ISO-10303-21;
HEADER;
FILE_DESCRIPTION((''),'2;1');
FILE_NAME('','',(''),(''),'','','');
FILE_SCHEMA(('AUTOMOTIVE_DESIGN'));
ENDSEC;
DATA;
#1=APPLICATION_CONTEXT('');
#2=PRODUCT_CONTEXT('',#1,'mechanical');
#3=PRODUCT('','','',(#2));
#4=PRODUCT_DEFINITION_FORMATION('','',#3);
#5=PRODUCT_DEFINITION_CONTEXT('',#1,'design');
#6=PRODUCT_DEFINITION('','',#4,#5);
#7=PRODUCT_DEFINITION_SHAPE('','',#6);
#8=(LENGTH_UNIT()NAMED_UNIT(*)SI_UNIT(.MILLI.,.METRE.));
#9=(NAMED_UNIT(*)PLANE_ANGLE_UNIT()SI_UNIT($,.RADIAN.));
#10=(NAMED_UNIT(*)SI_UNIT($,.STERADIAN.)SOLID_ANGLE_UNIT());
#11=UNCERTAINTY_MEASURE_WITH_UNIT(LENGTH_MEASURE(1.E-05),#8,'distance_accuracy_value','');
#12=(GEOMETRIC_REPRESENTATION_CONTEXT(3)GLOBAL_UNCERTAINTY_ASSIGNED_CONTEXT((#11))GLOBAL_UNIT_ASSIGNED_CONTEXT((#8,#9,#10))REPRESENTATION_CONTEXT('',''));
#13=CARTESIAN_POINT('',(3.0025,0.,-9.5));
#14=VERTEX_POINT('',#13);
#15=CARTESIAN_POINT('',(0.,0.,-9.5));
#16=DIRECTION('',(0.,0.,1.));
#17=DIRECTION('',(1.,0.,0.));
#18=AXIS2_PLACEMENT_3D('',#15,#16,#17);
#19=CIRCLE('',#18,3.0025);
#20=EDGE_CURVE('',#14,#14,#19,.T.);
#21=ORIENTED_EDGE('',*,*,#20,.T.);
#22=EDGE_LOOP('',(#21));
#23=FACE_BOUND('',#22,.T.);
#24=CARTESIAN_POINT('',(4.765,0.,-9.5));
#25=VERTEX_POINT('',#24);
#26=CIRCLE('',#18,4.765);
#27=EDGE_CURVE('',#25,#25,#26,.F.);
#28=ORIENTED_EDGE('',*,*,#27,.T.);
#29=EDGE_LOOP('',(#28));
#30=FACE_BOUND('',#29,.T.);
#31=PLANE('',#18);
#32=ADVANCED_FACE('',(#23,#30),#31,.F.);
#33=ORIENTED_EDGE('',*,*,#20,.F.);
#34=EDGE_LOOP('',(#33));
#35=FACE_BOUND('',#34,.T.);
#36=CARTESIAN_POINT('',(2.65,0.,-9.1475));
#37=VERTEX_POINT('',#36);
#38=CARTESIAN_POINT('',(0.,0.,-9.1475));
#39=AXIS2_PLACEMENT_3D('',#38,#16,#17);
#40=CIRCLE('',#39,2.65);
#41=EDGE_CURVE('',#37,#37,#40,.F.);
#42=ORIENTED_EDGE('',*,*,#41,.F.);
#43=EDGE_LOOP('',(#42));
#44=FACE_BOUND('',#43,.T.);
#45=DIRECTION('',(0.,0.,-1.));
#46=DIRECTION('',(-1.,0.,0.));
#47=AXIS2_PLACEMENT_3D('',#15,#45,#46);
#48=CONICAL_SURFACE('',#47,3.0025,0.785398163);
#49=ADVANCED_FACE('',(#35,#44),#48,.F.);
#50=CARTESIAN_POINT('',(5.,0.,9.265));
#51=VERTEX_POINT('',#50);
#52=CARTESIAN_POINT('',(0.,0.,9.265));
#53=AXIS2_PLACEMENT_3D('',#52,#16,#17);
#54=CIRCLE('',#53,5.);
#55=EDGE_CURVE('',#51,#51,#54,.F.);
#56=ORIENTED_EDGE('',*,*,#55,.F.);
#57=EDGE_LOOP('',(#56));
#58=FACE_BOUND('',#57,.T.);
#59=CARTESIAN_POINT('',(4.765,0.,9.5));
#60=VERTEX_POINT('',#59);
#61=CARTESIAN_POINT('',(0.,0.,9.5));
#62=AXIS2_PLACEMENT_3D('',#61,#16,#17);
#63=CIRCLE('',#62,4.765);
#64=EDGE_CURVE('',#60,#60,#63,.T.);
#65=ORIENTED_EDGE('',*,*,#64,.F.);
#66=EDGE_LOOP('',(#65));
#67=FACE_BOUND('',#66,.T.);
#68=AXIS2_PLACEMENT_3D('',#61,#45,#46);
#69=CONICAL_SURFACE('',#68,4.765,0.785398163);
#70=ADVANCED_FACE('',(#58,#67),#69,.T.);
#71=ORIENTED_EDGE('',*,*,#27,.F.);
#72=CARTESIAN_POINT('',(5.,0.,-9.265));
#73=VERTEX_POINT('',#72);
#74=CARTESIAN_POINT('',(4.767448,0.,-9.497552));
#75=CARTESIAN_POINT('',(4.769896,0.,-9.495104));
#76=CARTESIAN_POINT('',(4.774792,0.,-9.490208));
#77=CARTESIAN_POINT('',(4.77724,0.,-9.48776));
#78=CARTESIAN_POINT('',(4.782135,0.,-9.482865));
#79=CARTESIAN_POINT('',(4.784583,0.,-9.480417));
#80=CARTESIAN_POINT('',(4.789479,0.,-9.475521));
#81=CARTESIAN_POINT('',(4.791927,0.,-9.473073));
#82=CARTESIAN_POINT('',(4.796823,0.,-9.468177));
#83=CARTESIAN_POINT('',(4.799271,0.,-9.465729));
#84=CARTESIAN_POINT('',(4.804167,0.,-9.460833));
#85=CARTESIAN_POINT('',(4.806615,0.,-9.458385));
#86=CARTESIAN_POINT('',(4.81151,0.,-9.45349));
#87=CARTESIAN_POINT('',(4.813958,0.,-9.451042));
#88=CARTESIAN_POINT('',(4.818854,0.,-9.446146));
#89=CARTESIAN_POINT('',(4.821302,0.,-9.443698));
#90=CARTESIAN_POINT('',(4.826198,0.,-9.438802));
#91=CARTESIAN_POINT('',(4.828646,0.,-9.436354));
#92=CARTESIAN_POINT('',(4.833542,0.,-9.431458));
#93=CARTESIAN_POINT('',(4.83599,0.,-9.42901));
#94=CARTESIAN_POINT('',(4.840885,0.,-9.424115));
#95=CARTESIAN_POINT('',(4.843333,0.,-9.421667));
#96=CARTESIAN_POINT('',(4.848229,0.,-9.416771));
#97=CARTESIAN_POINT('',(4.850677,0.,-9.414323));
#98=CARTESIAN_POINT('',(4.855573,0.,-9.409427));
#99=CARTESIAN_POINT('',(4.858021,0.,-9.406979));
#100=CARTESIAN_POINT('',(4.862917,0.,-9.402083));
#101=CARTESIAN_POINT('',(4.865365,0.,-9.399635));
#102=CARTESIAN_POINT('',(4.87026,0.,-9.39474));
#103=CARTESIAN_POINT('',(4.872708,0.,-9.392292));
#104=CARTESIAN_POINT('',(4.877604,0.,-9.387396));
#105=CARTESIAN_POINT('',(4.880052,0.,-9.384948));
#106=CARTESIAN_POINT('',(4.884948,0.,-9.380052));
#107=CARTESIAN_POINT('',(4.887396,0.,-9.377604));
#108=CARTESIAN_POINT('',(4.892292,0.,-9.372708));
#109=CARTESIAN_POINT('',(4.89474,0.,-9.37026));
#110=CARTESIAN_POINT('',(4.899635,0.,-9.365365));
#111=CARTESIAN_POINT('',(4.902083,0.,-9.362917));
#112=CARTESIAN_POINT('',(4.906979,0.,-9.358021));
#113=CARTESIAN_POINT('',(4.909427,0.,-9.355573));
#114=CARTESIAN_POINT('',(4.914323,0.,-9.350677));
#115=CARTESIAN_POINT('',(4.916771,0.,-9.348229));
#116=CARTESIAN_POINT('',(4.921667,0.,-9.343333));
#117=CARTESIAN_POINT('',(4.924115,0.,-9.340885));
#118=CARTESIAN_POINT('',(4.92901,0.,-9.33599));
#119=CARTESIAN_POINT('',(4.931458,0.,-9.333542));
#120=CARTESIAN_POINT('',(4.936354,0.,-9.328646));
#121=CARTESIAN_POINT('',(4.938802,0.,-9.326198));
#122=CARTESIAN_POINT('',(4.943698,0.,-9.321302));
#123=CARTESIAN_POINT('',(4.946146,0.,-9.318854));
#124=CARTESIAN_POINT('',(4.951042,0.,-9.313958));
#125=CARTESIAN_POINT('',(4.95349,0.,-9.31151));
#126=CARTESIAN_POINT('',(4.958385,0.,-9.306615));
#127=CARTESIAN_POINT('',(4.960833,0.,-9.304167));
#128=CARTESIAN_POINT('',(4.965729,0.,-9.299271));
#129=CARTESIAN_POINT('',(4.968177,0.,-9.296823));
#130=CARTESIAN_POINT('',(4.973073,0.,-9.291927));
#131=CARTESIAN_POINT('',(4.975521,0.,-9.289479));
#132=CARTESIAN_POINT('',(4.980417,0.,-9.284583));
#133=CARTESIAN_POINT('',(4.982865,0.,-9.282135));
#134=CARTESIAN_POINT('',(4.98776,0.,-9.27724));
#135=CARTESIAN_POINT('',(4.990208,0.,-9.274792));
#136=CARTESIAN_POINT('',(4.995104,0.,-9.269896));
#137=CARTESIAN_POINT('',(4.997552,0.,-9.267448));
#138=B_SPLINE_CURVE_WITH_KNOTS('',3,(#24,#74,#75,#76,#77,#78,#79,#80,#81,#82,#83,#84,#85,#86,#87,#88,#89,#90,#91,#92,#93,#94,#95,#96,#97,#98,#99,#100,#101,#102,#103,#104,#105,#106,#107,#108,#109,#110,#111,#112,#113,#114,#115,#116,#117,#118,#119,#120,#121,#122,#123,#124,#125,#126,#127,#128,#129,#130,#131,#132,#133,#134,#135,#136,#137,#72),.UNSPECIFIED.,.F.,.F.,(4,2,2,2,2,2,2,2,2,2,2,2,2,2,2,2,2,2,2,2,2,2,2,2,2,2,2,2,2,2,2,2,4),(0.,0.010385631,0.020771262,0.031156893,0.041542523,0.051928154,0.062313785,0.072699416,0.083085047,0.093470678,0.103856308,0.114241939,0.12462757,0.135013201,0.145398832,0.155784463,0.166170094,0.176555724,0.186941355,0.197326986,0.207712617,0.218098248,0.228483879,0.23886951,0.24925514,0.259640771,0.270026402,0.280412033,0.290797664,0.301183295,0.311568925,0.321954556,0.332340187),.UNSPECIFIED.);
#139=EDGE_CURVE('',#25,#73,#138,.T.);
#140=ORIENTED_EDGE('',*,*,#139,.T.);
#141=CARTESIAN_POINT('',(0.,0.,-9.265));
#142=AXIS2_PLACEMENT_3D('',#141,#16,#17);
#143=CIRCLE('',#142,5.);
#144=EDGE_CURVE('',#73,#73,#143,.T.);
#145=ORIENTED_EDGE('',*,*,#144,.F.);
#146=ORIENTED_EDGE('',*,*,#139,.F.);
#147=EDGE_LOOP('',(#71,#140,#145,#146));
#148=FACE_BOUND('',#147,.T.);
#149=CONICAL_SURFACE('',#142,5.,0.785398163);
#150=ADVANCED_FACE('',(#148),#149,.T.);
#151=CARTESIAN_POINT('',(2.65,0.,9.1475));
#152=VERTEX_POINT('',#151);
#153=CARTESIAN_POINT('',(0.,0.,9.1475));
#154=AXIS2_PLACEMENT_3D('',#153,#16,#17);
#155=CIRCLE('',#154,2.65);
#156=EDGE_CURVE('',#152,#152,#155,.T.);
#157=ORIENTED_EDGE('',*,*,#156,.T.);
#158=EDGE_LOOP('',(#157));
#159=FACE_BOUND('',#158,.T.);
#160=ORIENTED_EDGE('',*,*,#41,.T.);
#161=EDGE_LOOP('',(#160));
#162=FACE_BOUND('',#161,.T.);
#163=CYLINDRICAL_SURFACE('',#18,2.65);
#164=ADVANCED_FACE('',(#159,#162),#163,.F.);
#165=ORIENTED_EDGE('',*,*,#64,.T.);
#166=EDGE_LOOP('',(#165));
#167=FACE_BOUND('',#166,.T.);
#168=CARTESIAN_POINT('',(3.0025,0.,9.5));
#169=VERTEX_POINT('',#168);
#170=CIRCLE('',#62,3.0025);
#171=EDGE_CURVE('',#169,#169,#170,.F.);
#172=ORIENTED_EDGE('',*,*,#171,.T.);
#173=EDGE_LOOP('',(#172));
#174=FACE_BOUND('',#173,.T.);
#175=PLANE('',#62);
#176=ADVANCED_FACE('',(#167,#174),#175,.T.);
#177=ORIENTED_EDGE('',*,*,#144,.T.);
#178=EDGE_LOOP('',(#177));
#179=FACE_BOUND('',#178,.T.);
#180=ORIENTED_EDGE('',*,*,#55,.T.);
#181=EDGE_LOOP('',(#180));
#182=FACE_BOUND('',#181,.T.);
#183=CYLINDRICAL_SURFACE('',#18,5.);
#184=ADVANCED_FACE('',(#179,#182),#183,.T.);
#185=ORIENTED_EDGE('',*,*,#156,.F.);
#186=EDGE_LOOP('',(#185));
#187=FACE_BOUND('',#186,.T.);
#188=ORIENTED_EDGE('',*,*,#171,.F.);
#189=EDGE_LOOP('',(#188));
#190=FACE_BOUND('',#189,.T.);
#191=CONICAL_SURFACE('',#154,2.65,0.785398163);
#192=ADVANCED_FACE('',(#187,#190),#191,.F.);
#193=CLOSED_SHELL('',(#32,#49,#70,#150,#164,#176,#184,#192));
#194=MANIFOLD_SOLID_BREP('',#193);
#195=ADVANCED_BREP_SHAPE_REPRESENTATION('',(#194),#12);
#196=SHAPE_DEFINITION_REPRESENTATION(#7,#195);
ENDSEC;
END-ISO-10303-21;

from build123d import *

# Parameters (mm, degrees)
BOSS_EXTRUDE1_DEPTH      = 9.5
BOSS_EXTRUDE1_DEPTH_BACK = 9.5
SKETCH3_R                = 5
SKETCH3_R_2              = 2.65
CHAMFER1_SIZE            = 0.235
CHAMFER2_SIZE            = 0.3525


with BuildPart() as part:
    # Sketch3 → Boss-Extrude1 (new, two sides: drawn at the far end of the back side and taken through both)
    with BuildSketch(Plane.XY.offset(-BOSS_EXTRUDE1_DEPTH_BACK)):
        Circle(SKETCH3_R)
        Circle(SKETCH3_R_2, mode=Mode.SUBTRACT)
    extrude(amount=BOSS_EXTRUDE1_DEPTH + BOSS_EXTRUDE1_DEPTH_BACK)

    # Chamfer1
    chamfer1_edges = [part.edges().sort_by_distance(p)[0] for p in [
        (-5, 0, -9.5),
        (-5, 0, 9.5),
    ]]
    chamfer(chamfer1_edges, length=CHAMFER1_SIZE)

    # Chamfer2
    chamfer2_edges = [part.edges().sort_by_distance(p)[0] for p in [
        (-2.65, 0, -9.5),
        (-2.65, 0, 9.5),
    ]]
    chamfer(chamfer2_edges, length=CHAMFER2_SIZE)


solid = part.part
